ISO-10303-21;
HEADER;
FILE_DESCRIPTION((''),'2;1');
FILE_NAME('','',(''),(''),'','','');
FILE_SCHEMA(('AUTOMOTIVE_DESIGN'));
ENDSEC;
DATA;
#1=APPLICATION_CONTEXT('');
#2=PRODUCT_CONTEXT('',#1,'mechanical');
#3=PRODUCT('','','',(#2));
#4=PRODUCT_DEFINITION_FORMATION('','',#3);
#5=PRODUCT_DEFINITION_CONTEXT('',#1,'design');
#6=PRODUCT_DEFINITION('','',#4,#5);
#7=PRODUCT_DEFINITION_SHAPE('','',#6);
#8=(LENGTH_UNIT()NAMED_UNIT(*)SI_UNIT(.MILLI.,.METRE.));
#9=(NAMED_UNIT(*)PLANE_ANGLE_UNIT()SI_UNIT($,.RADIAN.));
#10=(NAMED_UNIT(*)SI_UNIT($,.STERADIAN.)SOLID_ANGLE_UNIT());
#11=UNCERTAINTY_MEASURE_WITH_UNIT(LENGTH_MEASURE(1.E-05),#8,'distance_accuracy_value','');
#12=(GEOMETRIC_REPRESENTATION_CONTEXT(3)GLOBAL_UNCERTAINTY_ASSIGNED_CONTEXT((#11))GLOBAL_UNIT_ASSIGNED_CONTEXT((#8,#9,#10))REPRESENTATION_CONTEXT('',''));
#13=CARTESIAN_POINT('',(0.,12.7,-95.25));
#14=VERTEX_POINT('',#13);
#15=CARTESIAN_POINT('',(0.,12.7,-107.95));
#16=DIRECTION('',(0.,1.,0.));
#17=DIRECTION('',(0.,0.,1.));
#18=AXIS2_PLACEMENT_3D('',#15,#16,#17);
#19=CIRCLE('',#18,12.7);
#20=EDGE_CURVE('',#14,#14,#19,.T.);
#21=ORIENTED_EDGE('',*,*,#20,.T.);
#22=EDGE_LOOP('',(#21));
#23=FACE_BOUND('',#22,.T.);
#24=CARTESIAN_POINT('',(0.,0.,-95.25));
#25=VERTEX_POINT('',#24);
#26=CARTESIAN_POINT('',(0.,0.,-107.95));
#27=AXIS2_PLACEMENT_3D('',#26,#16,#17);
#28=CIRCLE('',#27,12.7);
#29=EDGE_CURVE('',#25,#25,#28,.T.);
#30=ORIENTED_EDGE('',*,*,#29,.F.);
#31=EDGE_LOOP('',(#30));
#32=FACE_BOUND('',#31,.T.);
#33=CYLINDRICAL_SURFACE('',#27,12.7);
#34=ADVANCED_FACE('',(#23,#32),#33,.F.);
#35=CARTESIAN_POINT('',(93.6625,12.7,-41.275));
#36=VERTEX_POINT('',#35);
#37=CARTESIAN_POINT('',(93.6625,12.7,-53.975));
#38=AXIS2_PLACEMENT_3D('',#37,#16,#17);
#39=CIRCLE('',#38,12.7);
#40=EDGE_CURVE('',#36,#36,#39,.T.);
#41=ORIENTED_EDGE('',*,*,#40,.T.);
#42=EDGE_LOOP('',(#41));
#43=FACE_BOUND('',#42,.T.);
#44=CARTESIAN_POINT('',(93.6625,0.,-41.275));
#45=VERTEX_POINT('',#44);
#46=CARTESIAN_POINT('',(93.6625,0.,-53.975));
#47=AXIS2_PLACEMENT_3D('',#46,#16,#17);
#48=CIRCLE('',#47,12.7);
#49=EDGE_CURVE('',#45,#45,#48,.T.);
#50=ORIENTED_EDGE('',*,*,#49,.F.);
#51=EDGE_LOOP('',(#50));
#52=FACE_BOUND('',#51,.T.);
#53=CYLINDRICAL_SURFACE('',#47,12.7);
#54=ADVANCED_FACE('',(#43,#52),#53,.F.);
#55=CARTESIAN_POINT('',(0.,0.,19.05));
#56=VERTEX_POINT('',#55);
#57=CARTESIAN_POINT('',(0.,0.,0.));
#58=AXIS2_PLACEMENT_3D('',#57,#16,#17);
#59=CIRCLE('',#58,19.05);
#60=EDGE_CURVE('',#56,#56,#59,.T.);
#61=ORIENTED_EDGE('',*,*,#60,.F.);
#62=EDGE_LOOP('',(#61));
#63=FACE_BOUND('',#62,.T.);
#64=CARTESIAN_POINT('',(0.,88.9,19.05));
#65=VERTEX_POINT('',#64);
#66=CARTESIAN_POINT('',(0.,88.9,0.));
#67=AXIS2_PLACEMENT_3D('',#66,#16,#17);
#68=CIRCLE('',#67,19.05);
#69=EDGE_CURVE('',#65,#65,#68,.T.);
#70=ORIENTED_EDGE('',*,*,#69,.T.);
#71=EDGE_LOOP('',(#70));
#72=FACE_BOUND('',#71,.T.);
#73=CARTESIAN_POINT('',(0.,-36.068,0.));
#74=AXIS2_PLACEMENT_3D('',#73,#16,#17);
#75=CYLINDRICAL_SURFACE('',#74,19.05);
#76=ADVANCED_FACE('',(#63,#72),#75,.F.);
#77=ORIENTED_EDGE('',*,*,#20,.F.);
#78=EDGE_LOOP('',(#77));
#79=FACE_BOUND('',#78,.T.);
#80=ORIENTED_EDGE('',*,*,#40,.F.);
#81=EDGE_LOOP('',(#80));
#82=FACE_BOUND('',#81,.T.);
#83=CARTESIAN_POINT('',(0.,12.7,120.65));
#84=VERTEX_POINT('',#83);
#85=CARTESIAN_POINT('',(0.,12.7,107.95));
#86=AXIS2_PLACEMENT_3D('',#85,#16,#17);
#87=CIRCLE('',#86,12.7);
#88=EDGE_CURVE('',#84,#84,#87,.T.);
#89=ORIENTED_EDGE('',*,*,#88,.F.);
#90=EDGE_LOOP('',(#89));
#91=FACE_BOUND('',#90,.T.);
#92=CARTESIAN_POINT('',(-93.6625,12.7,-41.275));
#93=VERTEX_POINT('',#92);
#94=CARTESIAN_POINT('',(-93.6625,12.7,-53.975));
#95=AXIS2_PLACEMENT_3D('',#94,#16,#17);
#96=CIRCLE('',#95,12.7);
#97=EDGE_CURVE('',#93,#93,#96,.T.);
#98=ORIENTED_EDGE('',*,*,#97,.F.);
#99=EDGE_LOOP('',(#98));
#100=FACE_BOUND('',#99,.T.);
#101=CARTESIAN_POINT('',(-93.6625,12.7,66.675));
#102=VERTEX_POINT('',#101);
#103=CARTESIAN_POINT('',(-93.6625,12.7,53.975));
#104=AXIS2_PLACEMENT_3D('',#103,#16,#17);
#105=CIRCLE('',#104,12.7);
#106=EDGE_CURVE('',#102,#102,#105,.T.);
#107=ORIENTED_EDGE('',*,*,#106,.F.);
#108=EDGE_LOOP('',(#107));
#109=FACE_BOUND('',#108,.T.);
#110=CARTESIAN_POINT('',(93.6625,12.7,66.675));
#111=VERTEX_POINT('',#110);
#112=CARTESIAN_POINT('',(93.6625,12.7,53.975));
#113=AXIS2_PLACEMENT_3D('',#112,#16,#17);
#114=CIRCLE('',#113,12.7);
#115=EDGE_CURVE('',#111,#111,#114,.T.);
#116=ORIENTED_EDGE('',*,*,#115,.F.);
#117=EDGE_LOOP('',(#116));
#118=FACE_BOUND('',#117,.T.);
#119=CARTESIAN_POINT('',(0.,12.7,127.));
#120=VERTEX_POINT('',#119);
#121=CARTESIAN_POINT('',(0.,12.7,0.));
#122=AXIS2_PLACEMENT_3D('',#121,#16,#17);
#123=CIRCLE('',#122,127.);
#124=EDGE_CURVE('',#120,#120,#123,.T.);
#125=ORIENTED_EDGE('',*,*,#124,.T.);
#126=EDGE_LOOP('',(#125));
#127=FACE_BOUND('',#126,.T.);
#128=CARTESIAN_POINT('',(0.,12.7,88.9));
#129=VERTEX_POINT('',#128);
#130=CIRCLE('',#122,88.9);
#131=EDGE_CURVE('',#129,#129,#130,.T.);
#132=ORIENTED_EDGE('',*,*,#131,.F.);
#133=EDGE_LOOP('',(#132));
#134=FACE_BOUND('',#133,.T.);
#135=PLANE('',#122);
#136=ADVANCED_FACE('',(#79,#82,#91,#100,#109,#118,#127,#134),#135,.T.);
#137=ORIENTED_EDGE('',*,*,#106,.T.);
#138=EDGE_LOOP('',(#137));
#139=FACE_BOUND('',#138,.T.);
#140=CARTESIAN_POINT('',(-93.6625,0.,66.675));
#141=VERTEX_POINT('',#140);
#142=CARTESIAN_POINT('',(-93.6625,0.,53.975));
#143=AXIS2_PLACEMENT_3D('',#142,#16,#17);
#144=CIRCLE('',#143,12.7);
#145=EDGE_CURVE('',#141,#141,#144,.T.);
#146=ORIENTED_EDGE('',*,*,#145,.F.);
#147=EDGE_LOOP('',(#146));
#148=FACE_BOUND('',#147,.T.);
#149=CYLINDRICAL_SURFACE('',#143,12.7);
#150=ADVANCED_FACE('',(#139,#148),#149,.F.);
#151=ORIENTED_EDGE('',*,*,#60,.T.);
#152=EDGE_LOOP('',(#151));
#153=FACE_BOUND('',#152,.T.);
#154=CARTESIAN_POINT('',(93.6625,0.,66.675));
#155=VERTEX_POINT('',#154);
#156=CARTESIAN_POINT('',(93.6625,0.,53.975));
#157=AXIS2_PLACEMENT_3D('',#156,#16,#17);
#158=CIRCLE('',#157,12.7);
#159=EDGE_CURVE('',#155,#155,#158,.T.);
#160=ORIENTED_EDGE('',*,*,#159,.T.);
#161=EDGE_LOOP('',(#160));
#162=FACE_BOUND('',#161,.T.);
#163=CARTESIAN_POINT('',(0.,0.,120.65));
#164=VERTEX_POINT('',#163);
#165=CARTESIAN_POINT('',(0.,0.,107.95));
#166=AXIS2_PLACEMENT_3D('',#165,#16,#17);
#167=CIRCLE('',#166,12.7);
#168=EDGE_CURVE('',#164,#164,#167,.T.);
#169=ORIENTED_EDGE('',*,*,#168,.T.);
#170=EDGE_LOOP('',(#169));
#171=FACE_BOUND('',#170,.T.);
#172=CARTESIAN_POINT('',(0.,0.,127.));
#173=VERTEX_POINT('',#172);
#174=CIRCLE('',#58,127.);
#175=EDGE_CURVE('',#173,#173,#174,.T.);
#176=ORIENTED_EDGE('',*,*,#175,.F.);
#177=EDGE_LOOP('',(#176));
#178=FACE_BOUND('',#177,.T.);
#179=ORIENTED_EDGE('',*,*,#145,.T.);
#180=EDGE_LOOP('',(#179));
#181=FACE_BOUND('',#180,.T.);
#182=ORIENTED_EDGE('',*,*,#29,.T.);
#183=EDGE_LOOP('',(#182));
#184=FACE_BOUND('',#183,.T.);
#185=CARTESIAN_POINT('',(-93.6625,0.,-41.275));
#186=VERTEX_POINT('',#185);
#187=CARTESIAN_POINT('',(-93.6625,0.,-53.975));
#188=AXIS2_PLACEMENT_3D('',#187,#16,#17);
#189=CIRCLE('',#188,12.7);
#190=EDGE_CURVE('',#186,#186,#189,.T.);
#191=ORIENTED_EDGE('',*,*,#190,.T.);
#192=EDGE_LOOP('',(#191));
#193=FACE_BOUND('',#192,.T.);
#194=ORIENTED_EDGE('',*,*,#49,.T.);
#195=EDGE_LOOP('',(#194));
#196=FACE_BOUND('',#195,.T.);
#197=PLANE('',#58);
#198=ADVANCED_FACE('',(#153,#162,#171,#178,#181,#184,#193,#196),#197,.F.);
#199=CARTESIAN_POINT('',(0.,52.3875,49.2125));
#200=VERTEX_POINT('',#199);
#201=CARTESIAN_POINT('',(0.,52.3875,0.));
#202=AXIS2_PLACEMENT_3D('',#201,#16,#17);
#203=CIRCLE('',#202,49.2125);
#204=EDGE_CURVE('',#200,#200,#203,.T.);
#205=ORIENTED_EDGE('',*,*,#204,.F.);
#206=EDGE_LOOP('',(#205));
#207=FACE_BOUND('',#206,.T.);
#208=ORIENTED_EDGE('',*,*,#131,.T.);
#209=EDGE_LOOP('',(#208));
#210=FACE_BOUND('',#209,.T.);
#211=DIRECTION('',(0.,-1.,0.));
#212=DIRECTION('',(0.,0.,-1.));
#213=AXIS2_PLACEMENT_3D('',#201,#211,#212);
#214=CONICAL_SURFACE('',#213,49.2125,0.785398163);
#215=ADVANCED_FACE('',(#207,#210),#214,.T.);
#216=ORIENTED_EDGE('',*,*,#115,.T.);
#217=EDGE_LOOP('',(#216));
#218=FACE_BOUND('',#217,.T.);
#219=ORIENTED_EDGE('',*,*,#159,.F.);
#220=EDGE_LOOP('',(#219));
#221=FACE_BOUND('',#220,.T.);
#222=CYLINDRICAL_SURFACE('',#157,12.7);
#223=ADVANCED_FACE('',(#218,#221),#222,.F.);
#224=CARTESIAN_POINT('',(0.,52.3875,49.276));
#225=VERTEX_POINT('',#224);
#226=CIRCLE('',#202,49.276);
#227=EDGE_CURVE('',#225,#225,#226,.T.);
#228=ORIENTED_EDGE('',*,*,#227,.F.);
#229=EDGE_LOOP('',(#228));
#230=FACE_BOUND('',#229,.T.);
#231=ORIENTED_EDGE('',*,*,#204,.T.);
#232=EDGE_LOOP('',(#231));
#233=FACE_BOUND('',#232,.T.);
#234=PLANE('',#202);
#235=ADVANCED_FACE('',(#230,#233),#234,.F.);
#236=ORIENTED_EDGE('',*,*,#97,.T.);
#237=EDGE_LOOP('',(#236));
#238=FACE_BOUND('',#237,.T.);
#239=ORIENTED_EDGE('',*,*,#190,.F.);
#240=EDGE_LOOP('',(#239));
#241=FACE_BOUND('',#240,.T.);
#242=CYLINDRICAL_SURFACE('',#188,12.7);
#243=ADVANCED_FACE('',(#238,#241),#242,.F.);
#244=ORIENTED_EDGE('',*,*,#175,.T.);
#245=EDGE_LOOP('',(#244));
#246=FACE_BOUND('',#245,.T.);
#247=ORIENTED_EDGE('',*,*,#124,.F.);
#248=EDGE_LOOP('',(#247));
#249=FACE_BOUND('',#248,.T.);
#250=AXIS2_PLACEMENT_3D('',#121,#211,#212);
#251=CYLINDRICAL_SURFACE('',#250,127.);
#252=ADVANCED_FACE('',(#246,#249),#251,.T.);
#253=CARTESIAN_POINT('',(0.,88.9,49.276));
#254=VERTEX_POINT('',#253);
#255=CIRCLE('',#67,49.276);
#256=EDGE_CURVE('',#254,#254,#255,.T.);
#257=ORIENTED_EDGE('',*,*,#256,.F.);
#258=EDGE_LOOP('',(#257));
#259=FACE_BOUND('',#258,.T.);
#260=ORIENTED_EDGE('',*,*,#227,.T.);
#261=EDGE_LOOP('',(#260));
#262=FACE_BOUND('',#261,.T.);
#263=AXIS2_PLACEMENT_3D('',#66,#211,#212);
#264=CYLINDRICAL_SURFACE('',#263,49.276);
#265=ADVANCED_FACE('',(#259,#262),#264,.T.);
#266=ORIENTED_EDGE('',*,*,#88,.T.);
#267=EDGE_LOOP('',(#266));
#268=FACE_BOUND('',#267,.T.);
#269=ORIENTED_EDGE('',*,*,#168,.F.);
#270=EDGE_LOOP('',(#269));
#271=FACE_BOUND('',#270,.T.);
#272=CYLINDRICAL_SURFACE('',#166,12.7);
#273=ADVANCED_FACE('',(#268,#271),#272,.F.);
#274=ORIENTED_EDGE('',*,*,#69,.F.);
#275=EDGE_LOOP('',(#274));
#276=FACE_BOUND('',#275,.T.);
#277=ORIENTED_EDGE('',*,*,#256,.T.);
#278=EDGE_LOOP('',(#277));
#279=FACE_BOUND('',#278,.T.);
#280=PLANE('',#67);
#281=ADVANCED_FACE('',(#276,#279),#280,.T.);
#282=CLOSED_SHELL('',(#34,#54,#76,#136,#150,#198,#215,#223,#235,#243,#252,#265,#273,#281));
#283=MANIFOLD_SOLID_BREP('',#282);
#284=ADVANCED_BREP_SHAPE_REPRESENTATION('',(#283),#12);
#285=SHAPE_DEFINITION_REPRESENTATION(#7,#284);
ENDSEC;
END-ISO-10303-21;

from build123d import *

# Parameters (mm, degrees)
SKETCH1_R           = 127
BOSS_EXTRUDE1_DEPTH = 12.7
SKETCH2_R           = 12.7
CUT_EXTRUDE1_DEPTH  = 12.7
SKETCH3_R           = 88.9
BOSS_EXTRUDE2_DEPTH = 39.6875
CHAMFER1_SIZE       = 39.6875
SKETCH4_R           = 19.05
CUT_EXTRUDE5_DEPTH  = 88.4555
BOSS_EXTRUDE3_START = 36.5125
SKETCH5_R           = 49.276
SKETCH5_R_2         = 19.05
BOSS_EXTRUDE3_DEPTH = 36.5125


with BuildPart() as part:
    # Sketch1 → Boss-Extrude1 (new body)
    with BuildSketch(Plane(origin=(0, 0, 0), x_dir=(1, 0, 0), z_dir=(0, 1, 0))):
        with Locations(Location((0, 0, 0), (0, 0, 270))):
            Circle(SKETCH1_R)
    extrude(amount=BOSS_EXTRUDE1_DEPTH)

    # Sketch2 → Cut-Extrude1 (cut)
    with BuildSketch(Plane(origin=(0, 12.7, 0), x_dir=(1, 0, 0), z_dir=(0, 1, 0))):
        with Locations(Location((0, 107.95, 0), (0, 0, 270))):
            Circle(SKETCH2_R)
        with Locations(Location((0, -107.95, 0), (0, 0, 270))):
            Circle(SKETCH2_R)
        with Locations(Location((-93.6625, -53.975, 0), (0, 0, 270))):
            Circle(SKETCH2_R)
        with Locations(Location((-93.6625, 53.975, 0), (0, 0, 270))):
            Circle(SKETCH2_R)
        with Locations(Location((93.6625, 53.975, 0), (0, 0, 270))):
            Circle(SKETCH2_R)
        with Locations(Location((93.6625, -53.975, 0), (0, 0, 270))):
            Circle(SKETCH2_R)
    extrude(amount=-CUT_EXTRUDE1_DEPTH, mode=Mode.SUBTRACT)

    # Sketch3 → Boss-Extrude2 (add)
    with BuildSketch(Plane(origin=(0, 12.7, 0), x_dir=(1, 0, 0), z_dir=(0, 1, 0))):
        with Locations(Location((0, 0, 0), (0, 0, 90))):
            Circle(SKETCH3_R)
    extrude(amount=BOSS_EXTRUDE2_DEPTH)

    # Chamfer1
    chamfer1_edges = [part.edges().sort_by_distance(p)[0] for p in [
        (0, 52.3875, 88.9),
    ]]
    chamfer(chamfer1_edges, length=CHAMFER1_SIZE - 0.0001)  # a hair under: the kernel refuses the full size

    # Sketch4 → Cut-Extrude5 (cut)
    with BuildSketch(Plane(origin=(0, 52.3875, 0), x_dir=(1, 0, 0), z_dir=(0, 1, 0))):
        with Locations(Location((0, 0, 0), (0, 0, 270))):
            Circle(SKETCH4_R)
    extrude(amount=-CUT_EXTRUDE5_DEPTH, mode=Mode.SUBTRACT)

    # Sketch5 → Boss-Extrude3 (add)
    with BuildSketch(Plane(origin=(0, 52.3875, 0), x_dir=(1, 0, 0), z_dir=(0, 1, 0)).offset(BOSS_EXTRUDE3_START)):
        with Locations(Location((0, 0, 0), (0, 0, 270))):
            Circle(SKETCH5_R)
        with Locations(Location((0, 0, 0), (0, 0, 270))):
            Circle(SKETCH5_R_2, mode=Mode.SUBTRACT)
    extrude(amount=-BOSS_EXTRUDE3_DEPTH)


solid = part.part
